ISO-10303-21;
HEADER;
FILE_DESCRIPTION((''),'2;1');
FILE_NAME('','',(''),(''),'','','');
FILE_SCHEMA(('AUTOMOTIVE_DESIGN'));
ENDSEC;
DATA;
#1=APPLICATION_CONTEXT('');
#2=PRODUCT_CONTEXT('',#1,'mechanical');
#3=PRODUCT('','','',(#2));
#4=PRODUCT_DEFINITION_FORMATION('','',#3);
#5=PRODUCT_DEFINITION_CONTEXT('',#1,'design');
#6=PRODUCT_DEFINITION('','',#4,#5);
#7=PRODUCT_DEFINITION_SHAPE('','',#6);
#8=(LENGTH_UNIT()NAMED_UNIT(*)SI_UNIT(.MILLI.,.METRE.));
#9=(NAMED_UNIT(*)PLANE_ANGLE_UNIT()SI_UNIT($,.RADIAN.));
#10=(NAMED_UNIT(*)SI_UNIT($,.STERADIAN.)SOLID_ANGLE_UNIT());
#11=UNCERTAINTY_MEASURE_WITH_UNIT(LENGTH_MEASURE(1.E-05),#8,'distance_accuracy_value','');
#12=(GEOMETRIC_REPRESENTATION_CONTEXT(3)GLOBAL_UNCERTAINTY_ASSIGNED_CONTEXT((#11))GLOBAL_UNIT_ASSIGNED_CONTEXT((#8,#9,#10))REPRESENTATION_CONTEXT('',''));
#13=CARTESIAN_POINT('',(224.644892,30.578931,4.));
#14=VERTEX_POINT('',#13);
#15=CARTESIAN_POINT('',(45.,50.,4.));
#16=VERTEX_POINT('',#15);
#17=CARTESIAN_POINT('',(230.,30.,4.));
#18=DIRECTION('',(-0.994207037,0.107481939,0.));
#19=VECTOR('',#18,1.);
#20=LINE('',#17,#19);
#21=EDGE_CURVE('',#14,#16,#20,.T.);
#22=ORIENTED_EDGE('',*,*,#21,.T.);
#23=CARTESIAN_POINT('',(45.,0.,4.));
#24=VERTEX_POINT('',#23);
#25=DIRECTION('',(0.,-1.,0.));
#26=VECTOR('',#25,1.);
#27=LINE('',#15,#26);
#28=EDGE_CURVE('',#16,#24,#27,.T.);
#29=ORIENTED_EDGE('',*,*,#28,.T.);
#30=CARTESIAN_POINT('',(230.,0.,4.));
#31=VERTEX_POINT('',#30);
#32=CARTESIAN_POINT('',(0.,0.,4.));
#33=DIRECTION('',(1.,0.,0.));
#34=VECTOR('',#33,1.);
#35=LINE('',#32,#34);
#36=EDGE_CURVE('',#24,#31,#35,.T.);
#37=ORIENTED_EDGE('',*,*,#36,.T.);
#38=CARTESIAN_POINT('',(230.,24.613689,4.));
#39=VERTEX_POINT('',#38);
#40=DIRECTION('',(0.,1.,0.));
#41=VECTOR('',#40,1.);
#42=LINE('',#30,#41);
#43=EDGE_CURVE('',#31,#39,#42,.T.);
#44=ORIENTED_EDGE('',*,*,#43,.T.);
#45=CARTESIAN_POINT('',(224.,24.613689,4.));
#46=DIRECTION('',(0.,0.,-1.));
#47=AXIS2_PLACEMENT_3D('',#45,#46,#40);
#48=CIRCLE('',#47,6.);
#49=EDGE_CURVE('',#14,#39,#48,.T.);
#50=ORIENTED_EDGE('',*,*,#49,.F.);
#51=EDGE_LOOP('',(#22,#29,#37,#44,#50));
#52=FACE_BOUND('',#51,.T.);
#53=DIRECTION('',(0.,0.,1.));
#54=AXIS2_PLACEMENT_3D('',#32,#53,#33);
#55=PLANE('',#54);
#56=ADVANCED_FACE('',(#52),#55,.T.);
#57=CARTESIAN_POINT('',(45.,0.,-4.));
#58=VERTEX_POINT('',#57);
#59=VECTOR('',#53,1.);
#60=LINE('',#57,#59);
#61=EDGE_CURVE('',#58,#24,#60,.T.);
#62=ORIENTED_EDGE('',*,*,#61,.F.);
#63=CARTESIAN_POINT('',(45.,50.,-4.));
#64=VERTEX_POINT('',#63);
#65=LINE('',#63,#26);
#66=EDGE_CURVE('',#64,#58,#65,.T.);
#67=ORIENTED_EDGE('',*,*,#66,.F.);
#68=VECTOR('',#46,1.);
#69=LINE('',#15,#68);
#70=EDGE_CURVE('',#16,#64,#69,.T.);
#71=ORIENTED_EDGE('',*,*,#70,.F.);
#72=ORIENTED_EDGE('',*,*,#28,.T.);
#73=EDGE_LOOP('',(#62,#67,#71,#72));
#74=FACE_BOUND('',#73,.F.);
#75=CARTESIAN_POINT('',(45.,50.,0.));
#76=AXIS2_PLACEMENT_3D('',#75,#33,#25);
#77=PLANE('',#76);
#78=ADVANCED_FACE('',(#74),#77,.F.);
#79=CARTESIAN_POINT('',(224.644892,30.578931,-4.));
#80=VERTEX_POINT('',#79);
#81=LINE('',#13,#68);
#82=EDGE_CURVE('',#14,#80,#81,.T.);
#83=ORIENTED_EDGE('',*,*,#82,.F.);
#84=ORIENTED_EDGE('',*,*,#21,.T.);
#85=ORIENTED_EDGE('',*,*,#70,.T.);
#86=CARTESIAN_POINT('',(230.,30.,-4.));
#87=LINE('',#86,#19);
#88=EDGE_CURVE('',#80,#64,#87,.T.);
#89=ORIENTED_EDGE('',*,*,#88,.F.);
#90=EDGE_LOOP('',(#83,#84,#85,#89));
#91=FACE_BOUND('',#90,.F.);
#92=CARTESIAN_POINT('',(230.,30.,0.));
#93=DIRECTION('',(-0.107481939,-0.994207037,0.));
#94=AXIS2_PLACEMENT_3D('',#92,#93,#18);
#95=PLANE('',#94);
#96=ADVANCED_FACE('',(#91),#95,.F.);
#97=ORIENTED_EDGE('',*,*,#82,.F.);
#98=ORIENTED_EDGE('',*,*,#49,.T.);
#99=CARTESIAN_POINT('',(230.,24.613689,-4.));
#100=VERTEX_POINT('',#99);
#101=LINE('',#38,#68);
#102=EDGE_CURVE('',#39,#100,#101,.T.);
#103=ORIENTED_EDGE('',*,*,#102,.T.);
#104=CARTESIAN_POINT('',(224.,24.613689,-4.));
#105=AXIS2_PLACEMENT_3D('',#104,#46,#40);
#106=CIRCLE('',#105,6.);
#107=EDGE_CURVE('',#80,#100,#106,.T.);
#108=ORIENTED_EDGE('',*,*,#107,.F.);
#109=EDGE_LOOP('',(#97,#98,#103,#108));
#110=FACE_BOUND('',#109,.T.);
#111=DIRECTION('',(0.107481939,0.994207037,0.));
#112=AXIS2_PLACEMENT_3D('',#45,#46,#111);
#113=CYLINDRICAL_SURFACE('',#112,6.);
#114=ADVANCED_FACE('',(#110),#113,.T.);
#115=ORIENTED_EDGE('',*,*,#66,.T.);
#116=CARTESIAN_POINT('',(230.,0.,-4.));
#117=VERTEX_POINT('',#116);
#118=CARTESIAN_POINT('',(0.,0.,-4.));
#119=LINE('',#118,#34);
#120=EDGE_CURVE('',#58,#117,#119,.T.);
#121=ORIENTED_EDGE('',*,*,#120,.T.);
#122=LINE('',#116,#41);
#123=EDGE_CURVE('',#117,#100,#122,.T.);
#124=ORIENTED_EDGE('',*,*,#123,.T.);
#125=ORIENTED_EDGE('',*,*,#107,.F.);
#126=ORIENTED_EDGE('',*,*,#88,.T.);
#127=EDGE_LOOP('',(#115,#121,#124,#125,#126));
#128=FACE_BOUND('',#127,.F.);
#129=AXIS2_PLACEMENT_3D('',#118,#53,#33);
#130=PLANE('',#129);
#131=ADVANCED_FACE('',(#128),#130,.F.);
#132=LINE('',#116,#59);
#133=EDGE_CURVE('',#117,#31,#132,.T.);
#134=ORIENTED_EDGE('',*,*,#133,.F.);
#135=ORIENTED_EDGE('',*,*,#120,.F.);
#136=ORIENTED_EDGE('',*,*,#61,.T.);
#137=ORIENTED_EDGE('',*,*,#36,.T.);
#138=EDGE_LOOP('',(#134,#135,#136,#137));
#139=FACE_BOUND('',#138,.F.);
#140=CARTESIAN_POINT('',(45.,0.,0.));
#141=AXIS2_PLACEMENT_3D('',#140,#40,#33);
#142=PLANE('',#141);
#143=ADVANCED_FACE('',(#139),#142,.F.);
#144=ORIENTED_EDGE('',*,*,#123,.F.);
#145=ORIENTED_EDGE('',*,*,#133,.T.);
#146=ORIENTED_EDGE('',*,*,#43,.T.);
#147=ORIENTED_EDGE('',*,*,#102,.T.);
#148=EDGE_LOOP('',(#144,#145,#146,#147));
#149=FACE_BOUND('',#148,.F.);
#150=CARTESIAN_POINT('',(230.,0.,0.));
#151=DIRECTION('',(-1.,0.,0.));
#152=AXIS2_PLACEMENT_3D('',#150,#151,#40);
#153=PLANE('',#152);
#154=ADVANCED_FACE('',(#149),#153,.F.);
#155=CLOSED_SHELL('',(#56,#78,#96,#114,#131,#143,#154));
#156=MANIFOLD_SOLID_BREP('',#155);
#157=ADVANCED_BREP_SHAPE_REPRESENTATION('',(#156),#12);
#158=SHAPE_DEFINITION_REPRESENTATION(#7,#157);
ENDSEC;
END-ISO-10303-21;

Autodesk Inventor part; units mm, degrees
ref_plane "YZ Plane" through (0, 0, 0) normal (1, 0, 0) x (0, 1, 0)
ref_plane "XZ Plane" through (0, 0, 0) normal (0, 1, 0) x (-1, 0, 0)
ref_plane "XY Plane" through (0, 0, 0) normal (0, 0, 1) x (1, 0, 0)
sketch "Sketch3" plane through (0, 0, 0) normal (0, 0, 1) x (1, 0, 0)
  line L0 (0, 0) -> (230, 0)
  line L1 (230, 0) -> (230, 30)
  line L2 (230, 30) -> (-74.7049, 62.9411)
  line L3 (45, 50) -> (45, 0)
  dimension "d11" = 230
  dimension "d12" = 30
  dimension "d13" = 45
  dimension "d14" = 50
extrude "Plate1" add sketch "Sketch3" along normal mid plane 8
fillet "Corner Round1" radius 6 1 edges at (230, 30, 0)
equation "\"d15\" = Thickness"
equation "\"BendRadius\" = Thickness"
equation "\"BendReliefWidth\" = Thickness"
equation "\"BendReliefDepth\" = 0.5 * Thickness"
equation "\"CornerReliefSize\" = 4 * Thickness"
equation "\"MinimumRemnant\" = 2 * Thickness"
equation "\"TransitionRadius\" = BendRadius"
equation "\"JacobiRadiusSize\" = BendRadius"
equation "\"GapSize\" = Thickness"
equation "\"Thickness\" = 8"
properties part number "APN 1413 charging hatch reinf" material "Steel"
